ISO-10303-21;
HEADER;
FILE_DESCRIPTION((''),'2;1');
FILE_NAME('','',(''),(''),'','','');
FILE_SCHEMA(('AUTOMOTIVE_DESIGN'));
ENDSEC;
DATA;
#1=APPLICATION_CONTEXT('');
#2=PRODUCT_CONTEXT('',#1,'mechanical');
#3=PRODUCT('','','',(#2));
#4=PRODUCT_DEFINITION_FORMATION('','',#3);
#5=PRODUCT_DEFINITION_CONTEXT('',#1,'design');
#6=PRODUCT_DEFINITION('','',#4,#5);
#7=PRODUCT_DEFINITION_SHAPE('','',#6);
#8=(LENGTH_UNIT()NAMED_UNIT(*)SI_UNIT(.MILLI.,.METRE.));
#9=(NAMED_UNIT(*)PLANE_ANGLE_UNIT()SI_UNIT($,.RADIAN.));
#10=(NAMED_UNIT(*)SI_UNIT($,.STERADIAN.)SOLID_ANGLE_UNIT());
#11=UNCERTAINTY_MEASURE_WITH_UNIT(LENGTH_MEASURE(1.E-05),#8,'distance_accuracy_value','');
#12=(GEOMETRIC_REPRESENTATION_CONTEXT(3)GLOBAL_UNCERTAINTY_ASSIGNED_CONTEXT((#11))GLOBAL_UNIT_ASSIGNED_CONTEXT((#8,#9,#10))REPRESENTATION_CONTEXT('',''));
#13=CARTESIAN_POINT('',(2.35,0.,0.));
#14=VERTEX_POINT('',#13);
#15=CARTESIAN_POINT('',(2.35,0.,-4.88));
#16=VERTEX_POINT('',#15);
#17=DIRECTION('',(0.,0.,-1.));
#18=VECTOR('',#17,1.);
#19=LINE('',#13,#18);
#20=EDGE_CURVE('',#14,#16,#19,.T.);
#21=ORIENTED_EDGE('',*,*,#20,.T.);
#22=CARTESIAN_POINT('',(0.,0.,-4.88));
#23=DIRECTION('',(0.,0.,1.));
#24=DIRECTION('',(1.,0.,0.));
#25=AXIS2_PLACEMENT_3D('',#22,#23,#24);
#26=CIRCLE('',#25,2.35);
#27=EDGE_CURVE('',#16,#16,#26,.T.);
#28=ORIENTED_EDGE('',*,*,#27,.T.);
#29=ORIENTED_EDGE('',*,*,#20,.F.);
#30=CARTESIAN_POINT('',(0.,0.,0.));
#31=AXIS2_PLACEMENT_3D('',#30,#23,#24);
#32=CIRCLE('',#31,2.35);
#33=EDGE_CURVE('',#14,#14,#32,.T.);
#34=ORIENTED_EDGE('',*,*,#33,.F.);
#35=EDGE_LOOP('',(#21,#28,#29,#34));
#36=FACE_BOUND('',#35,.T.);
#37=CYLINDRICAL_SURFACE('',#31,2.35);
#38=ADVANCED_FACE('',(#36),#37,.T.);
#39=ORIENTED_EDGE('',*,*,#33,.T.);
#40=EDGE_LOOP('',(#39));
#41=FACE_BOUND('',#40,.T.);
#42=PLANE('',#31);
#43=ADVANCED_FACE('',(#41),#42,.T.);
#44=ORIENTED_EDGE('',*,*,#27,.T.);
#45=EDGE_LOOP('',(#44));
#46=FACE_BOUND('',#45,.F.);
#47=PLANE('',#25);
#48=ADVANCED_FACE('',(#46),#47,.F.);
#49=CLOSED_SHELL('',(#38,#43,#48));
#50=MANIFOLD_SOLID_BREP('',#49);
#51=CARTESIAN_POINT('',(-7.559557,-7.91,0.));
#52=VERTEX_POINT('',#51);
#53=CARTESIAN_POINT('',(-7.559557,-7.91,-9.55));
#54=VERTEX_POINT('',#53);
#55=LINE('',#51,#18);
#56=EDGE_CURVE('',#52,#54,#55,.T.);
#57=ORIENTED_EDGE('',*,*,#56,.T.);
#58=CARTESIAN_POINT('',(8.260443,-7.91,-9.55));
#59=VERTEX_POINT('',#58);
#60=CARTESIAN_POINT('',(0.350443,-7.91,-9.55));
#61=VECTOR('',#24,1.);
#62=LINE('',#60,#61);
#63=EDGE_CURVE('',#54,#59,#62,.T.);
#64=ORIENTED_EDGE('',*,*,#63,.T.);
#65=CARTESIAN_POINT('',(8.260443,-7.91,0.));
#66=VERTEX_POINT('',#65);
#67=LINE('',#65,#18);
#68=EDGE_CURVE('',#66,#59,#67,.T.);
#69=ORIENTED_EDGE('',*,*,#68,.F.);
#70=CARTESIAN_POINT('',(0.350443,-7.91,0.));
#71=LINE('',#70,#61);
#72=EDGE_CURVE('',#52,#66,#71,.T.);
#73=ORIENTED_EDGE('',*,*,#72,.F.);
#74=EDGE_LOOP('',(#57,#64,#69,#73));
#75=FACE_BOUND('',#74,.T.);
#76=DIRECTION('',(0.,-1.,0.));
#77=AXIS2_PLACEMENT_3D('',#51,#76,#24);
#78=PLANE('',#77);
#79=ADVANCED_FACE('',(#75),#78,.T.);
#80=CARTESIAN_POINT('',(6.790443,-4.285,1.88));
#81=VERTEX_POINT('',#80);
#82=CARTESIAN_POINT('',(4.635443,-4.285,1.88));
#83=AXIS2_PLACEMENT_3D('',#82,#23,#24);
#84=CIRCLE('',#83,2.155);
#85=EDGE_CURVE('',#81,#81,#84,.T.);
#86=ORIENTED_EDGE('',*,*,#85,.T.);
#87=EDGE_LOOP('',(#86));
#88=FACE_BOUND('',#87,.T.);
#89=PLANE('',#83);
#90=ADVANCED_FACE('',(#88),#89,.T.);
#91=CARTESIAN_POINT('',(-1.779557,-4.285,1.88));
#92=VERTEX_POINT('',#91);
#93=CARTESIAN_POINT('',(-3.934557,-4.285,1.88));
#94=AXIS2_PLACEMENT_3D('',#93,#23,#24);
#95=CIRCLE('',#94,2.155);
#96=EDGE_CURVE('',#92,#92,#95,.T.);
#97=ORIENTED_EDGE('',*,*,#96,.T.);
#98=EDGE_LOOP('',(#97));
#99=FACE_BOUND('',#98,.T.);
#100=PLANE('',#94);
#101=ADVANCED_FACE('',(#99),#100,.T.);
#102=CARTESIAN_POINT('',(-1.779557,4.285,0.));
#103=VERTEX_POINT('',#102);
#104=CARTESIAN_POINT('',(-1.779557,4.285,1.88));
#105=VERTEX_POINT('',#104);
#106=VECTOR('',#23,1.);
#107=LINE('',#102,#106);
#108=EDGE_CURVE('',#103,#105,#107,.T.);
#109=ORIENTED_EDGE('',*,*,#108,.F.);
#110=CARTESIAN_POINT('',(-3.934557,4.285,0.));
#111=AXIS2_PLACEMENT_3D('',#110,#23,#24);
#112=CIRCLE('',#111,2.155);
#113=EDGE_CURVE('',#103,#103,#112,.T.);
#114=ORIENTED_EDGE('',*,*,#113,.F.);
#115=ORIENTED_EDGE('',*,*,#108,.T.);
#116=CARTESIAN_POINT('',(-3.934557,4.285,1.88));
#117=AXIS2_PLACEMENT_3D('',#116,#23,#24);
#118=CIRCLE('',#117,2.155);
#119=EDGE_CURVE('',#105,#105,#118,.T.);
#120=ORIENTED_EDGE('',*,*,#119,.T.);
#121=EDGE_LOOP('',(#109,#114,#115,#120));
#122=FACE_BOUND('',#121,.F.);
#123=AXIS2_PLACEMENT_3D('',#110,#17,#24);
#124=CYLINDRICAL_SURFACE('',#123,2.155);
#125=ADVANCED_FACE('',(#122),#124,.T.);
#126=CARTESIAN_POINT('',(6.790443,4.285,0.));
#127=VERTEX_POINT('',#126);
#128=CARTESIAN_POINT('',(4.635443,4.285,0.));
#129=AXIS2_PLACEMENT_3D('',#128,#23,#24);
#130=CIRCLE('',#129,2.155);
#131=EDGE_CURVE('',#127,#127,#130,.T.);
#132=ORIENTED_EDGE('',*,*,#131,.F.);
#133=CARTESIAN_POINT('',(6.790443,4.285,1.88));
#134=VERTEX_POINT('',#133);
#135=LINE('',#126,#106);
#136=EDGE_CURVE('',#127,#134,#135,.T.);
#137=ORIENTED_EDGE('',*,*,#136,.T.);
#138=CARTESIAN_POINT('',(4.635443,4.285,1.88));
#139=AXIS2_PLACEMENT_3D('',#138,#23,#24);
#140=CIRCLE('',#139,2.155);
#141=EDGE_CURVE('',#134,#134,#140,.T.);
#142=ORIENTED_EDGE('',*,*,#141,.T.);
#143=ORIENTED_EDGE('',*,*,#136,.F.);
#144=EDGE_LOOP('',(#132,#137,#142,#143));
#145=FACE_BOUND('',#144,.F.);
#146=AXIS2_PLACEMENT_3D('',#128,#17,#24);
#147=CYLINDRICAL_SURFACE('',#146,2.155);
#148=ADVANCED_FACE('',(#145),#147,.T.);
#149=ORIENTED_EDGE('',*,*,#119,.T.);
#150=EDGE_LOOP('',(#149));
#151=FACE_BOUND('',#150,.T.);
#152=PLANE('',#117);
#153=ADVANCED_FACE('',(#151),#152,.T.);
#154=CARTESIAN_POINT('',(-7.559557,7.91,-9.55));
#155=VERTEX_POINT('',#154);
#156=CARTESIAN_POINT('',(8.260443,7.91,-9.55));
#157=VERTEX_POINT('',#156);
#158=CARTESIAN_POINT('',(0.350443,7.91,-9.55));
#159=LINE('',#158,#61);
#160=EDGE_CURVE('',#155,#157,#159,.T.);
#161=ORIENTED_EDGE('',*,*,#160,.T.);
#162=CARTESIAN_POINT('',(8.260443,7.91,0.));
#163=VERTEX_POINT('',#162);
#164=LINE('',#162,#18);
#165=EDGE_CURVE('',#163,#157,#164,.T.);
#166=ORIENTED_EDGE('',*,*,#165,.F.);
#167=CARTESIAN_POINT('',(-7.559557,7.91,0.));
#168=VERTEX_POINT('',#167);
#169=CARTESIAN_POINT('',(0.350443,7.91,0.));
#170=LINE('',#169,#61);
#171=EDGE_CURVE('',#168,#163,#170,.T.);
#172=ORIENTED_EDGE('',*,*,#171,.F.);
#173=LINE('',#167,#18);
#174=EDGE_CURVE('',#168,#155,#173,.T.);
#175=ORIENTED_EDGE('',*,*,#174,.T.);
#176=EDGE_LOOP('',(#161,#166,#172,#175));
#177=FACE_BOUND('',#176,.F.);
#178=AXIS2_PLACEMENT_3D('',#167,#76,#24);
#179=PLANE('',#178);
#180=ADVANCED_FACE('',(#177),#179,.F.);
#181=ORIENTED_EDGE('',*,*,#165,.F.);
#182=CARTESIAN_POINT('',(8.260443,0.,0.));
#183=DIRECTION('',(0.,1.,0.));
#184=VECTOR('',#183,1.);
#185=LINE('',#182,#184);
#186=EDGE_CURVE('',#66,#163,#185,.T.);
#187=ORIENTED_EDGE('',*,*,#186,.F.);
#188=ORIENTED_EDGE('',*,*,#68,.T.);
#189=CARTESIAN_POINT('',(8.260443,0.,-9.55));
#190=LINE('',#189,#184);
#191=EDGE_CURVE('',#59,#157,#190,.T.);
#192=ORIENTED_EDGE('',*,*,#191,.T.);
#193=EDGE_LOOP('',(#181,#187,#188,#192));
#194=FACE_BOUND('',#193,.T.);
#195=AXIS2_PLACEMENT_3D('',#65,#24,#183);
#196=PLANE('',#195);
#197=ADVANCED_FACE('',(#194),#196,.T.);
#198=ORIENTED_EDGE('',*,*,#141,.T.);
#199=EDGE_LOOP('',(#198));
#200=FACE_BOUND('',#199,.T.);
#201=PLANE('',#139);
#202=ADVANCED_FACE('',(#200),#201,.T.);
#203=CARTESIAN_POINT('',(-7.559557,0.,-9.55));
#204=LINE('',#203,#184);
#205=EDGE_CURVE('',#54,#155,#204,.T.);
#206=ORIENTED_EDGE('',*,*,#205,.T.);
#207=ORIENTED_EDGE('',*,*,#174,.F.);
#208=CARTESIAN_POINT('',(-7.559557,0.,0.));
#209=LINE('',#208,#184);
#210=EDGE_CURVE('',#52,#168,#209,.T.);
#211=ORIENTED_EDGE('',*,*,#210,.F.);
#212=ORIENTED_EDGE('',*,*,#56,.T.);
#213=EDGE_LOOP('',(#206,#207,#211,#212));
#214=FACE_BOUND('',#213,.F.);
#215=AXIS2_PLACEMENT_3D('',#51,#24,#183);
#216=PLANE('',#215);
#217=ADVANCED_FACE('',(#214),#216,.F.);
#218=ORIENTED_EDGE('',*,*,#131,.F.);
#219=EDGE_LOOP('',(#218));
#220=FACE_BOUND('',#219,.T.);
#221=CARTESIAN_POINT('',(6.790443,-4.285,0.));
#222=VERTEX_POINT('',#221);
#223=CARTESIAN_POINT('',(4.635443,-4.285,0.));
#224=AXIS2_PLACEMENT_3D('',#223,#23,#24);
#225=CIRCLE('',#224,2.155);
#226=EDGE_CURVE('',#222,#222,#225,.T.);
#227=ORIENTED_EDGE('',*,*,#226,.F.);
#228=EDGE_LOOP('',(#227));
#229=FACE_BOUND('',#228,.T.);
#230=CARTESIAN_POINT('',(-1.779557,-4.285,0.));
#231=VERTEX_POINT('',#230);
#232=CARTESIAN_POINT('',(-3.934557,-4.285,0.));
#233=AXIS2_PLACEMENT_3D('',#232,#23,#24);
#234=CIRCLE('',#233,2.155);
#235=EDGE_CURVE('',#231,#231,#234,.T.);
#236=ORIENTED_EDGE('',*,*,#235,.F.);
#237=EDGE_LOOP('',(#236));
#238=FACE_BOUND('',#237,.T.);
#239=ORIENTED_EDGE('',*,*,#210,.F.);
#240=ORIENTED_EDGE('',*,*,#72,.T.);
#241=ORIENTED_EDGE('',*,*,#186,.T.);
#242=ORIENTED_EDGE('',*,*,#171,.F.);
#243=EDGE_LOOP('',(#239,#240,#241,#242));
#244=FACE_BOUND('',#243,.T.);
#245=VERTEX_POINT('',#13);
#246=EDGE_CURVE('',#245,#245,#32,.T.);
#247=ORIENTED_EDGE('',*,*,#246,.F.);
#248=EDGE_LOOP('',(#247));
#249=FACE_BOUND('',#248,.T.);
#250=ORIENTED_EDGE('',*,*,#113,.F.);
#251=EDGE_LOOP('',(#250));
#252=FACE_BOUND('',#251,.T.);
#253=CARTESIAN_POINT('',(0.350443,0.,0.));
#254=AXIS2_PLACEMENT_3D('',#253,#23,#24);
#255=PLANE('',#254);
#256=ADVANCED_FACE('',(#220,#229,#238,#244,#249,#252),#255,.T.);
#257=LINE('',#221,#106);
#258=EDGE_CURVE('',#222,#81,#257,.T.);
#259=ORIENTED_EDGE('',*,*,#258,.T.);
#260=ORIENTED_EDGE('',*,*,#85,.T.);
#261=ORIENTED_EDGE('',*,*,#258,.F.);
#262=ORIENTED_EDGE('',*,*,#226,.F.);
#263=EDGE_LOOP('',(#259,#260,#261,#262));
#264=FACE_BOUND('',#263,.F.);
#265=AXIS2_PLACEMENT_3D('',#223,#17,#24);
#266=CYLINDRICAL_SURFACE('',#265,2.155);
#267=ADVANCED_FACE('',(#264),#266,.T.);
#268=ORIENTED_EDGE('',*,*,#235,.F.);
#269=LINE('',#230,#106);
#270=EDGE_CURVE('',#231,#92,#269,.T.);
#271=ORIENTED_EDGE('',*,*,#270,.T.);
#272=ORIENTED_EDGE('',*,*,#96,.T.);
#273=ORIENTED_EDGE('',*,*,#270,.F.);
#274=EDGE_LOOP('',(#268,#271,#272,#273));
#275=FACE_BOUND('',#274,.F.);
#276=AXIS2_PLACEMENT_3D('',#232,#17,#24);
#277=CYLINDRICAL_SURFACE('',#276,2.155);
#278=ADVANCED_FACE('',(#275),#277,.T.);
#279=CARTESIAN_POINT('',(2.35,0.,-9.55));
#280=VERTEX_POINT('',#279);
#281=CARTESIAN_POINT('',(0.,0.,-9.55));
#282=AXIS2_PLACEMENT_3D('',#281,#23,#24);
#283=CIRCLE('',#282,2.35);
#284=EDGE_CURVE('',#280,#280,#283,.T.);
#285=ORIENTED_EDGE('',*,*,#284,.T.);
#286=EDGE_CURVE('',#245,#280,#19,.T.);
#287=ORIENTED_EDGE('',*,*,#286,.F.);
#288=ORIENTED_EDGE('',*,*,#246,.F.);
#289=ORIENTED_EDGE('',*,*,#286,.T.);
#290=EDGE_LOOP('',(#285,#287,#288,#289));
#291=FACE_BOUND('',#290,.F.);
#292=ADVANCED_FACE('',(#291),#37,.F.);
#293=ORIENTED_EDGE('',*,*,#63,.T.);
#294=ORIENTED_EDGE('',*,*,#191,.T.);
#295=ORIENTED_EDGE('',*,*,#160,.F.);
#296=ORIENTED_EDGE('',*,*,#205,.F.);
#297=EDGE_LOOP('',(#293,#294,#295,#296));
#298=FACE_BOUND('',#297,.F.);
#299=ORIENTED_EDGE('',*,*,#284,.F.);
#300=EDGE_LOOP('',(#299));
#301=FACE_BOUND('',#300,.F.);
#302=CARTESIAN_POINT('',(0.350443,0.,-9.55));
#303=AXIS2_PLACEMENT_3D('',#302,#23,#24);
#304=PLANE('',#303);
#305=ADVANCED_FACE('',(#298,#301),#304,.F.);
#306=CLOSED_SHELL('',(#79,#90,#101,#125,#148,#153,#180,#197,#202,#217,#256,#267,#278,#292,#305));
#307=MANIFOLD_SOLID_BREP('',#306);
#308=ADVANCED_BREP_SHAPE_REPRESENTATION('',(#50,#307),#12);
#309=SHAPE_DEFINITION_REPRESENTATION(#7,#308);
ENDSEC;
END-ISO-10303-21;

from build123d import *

# Parameters (mm, degrees)
F0_W     = 15.82
F0_H     = 15.82
F0_R     = 2.155
F0_R_2   = 2.35
F1_DEPTH = 9.55
F2_DEPTH = 1.88
F3_DEPTH = 4.88


with BuildPart() as f1:
    # F0 (on Top) → F1 (new body)
    with BuildSketch(Plane.XY):
        with Locations((0.3504429367, 0)):
            Rectangle(F0_W, F0_H)
        with Locations((-3.9345570633, -4.285)):
            Circle(F0_R, mode=Mode.SUBTRACT)
        Circle(F0_R_2, mode=Mode.SUBTRACT)
        with Locations((4.6354429367, -4.285)):
            Circle(F0_R, mode=Mode.SUBTRACT)
        with Locations((-3.9345570633, 4.285)):
            Circle(F0_R, mode=Mode.SUBTRACT)
        with Locations((4.6354429367, 4.285)):
            Circle(F0_R, mode=Mode.SUBTRACT)
        with Locations((-3.9345570633, -4.285)):
            Circle(F0_R)
        with Locations((-3.9345570633, 4.285)):
            Circle(F0_R)
        with Locations((4.6354429367, 4.285)):
            Circle(F0_R)
        with Locations((4.6354429367, -4.285)):
            Circle(F0_R)
    extrude(amount=-F1_DEPTH)

    # F0 (on Top) → F2 (join)
    with BuildSketch(Plane.XY):
        with Locations((-3.9345570633, 4.285)):
            Circle(F0_R)
        with Locations((-3.9345570633, -4.285)):
            Circle(F0_R)
        with Locations((4.6354429367, 4.285)):
            Circle(F0_R)
        with Locations((4.6354429367, -4.285)):
            Circle(F0_R)
    extrude(amount=F2_DEPTH)


with BuildPart() as f3:
    # F0 (on Top) → F3 (new body)
    with BuildSketch(Plane.XY):
        Circle(F0_R_2)
    extrude(amount=-F3_DEPTH)


solid = Compound([f1.part, f3.part])
